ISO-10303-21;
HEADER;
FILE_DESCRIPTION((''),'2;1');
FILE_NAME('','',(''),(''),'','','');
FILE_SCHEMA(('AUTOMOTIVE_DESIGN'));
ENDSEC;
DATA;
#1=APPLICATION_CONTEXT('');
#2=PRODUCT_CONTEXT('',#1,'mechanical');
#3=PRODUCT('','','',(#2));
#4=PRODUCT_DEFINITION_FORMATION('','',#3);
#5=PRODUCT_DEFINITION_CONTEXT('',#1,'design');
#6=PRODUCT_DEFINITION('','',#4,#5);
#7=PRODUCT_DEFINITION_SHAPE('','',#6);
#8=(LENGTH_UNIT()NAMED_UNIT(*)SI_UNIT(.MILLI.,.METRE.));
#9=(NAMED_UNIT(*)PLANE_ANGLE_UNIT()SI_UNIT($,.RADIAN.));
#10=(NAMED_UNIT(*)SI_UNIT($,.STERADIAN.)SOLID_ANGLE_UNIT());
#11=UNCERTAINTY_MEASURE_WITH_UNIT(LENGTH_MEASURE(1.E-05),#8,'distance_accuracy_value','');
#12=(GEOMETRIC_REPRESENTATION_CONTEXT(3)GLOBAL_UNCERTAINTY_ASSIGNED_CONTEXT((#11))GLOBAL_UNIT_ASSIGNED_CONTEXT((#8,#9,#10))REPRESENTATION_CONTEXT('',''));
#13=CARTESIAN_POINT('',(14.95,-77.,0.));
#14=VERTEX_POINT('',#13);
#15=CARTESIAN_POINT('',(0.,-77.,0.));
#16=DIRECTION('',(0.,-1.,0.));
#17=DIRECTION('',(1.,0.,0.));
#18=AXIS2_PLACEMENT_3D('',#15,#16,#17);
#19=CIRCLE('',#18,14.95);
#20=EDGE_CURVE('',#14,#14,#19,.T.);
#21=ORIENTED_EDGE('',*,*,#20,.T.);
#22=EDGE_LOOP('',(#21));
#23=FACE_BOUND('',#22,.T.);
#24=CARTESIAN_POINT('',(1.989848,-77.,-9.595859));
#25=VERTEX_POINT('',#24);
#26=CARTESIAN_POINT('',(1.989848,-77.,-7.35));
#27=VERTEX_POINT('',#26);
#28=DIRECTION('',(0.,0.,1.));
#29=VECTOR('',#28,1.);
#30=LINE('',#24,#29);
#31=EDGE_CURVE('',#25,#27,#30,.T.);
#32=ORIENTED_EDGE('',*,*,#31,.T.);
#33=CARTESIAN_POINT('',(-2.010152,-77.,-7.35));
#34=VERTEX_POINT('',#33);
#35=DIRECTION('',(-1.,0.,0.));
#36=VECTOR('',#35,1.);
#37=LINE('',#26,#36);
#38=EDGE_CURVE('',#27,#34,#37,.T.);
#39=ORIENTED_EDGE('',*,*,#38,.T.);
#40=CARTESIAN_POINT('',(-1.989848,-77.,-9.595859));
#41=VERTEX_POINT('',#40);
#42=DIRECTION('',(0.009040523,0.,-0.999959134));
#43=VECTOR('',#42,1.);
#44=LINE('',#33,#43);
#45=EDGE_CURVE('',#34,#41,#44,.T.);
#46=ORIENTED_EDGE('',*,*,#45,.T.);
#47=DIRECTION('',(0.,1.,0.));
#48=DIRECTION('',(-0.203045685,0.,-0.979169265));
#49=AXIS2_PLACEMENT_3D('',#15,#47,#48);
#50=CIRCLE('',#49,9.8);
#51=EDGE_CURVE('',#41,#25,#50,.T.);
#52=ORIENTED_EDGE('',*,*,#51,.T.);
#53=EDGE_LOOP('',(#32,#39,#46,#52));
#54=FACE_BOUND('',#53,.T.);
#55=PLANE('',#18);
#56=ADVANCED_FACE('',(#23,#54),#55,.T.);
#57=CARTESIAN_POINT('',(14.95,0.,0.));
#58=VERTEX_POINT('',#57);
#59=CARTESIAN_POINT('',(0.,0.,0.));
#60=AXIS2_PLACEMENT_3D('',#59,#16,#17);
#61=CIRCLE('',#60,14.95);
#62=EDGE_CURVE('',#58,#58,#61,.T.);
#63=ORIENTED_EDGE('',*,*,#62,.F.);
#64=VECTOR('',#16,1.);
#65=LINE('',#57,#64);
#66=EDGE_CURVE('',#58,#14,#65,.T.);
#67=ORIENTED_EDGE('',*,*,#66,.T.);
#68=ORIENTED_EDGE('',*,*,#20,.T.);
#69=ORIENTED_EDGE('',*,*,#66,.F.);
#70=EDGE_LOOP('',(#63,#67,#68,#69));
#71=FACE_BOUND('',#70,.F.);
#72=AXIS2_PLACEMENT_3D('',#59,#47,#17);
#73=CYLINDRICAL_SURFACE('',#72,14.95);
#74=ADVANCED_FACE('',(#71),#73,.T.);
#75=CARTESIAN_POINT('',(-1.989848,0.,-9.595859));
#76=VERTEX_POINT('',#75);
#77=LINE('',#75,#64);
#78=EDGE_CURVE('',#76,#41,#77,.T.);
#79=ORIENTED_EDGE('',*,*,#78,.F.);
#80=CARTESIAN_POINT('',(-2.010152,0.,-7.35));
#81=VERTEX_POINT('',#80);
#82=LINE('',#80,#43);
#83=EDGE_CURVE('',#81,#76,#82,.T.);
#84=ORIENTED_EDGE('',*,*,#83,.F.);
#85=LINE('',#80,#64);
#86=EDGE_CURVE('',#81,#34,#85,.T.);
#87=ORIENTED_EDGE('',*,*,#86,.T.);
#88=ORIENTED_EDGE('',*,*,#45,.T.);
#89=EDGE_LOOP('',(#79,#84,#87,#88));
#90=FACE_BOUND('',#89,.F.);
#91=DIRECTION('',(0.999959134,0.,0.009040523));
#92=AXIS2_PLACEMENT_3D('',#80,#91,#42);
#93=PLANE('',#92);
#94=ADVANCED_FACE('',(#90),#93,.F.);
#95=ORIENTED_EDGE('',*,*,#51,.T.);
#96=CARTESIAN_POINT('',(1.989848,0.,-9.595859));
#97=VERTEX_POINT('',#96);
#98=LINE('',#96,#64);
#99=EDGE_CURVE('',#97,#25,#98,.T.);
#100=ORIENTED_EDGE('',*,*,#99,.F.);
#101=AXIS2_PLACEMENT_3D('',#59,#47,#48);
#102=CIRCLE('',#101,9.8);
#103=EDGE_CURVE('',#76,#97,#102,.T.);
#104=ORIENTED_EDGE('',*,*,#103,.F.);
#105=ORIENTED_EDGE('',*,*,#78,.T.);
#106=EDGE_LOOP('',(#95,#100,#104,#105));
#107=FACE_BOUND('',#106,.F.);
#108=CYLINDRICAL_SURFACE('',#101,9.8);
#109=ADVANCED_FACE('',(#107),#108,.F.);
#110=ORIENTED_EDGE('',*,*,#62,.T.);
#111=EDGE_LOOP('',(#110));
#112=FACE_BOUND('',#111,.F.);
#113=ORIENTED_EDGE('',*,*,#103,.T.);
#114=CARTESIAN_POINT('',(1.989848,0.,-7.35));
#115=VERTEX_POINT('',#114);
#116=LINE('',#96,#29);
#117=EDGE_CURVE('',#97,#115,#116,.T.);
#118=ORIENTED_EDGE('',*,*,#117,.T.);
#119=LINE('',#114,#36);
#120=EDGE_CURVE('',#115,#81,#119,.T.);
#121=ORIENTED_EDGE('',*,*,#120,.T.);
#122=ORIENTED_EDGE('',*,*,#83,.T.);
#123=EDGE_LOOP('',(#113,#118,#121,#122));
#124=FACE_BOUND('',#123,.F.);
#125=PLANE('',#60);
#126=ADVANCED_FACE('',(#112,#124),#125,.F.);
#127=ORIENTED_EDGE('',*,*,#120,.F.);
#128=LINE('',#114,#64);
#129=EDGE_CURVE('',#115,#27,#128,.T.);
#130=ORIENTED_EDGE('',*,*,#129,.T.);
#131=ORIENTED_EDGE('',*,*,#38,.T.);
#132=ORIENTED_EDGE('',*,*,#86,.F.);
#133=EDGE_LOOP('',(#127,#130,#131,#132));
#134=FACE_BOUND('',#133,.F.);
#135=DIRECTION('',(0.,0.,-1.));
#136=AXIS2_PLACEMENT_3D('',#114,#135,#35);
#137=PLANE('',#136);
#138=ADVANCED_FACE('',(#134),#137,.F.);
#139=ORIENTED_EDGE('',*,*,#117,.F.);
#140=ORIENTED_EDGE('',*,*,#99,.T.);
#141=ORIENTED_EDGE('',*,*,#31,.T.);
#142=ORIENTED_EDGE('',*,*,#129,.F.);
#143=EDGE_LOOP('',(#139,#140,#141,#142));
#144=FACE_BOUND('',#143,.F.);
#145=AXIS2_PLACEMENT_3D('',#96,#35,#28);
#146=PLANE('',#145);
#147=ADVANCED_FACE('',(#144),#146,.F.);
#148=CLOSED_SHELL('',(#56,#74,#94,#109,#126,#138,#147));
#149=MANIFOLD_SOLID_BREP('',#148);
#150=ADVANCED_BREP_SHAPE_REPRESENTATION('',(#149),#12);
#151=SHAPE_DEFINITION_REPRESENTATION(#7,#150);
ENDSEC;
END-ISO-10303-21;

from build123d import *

# Parameters (mm, degrees)
F0_R     = 14.95
F1_DEPTH = 77


# Not quite as in the source:
# - a feature names something its author has since deleted; it is built from what else it names


with BuildPart() as f1:
    # F0 (on Front) → F1 (new body)
    with BuildSketch(Plane.XZ):
        Circle(F0_R)
        with BuildLine():
            ThreePointArc((-1.9898477157, -9.5958587978), (0, 9.8), (1.9898477157, -9.5958587978))
            Line((1.9898477157, -9.5958587978), (1.9898477157, -7.35))
            Line((1.9898477157, -7.35), (-2.0101522843, -7.35))
            Line((-2.0101522843, -7.35), (-1.9898477157, -9.5958587978))
        make_face(mode=Mode.SUBTRACT)
    extrude(amount=F1_DEPTH)


solid = f1.part
